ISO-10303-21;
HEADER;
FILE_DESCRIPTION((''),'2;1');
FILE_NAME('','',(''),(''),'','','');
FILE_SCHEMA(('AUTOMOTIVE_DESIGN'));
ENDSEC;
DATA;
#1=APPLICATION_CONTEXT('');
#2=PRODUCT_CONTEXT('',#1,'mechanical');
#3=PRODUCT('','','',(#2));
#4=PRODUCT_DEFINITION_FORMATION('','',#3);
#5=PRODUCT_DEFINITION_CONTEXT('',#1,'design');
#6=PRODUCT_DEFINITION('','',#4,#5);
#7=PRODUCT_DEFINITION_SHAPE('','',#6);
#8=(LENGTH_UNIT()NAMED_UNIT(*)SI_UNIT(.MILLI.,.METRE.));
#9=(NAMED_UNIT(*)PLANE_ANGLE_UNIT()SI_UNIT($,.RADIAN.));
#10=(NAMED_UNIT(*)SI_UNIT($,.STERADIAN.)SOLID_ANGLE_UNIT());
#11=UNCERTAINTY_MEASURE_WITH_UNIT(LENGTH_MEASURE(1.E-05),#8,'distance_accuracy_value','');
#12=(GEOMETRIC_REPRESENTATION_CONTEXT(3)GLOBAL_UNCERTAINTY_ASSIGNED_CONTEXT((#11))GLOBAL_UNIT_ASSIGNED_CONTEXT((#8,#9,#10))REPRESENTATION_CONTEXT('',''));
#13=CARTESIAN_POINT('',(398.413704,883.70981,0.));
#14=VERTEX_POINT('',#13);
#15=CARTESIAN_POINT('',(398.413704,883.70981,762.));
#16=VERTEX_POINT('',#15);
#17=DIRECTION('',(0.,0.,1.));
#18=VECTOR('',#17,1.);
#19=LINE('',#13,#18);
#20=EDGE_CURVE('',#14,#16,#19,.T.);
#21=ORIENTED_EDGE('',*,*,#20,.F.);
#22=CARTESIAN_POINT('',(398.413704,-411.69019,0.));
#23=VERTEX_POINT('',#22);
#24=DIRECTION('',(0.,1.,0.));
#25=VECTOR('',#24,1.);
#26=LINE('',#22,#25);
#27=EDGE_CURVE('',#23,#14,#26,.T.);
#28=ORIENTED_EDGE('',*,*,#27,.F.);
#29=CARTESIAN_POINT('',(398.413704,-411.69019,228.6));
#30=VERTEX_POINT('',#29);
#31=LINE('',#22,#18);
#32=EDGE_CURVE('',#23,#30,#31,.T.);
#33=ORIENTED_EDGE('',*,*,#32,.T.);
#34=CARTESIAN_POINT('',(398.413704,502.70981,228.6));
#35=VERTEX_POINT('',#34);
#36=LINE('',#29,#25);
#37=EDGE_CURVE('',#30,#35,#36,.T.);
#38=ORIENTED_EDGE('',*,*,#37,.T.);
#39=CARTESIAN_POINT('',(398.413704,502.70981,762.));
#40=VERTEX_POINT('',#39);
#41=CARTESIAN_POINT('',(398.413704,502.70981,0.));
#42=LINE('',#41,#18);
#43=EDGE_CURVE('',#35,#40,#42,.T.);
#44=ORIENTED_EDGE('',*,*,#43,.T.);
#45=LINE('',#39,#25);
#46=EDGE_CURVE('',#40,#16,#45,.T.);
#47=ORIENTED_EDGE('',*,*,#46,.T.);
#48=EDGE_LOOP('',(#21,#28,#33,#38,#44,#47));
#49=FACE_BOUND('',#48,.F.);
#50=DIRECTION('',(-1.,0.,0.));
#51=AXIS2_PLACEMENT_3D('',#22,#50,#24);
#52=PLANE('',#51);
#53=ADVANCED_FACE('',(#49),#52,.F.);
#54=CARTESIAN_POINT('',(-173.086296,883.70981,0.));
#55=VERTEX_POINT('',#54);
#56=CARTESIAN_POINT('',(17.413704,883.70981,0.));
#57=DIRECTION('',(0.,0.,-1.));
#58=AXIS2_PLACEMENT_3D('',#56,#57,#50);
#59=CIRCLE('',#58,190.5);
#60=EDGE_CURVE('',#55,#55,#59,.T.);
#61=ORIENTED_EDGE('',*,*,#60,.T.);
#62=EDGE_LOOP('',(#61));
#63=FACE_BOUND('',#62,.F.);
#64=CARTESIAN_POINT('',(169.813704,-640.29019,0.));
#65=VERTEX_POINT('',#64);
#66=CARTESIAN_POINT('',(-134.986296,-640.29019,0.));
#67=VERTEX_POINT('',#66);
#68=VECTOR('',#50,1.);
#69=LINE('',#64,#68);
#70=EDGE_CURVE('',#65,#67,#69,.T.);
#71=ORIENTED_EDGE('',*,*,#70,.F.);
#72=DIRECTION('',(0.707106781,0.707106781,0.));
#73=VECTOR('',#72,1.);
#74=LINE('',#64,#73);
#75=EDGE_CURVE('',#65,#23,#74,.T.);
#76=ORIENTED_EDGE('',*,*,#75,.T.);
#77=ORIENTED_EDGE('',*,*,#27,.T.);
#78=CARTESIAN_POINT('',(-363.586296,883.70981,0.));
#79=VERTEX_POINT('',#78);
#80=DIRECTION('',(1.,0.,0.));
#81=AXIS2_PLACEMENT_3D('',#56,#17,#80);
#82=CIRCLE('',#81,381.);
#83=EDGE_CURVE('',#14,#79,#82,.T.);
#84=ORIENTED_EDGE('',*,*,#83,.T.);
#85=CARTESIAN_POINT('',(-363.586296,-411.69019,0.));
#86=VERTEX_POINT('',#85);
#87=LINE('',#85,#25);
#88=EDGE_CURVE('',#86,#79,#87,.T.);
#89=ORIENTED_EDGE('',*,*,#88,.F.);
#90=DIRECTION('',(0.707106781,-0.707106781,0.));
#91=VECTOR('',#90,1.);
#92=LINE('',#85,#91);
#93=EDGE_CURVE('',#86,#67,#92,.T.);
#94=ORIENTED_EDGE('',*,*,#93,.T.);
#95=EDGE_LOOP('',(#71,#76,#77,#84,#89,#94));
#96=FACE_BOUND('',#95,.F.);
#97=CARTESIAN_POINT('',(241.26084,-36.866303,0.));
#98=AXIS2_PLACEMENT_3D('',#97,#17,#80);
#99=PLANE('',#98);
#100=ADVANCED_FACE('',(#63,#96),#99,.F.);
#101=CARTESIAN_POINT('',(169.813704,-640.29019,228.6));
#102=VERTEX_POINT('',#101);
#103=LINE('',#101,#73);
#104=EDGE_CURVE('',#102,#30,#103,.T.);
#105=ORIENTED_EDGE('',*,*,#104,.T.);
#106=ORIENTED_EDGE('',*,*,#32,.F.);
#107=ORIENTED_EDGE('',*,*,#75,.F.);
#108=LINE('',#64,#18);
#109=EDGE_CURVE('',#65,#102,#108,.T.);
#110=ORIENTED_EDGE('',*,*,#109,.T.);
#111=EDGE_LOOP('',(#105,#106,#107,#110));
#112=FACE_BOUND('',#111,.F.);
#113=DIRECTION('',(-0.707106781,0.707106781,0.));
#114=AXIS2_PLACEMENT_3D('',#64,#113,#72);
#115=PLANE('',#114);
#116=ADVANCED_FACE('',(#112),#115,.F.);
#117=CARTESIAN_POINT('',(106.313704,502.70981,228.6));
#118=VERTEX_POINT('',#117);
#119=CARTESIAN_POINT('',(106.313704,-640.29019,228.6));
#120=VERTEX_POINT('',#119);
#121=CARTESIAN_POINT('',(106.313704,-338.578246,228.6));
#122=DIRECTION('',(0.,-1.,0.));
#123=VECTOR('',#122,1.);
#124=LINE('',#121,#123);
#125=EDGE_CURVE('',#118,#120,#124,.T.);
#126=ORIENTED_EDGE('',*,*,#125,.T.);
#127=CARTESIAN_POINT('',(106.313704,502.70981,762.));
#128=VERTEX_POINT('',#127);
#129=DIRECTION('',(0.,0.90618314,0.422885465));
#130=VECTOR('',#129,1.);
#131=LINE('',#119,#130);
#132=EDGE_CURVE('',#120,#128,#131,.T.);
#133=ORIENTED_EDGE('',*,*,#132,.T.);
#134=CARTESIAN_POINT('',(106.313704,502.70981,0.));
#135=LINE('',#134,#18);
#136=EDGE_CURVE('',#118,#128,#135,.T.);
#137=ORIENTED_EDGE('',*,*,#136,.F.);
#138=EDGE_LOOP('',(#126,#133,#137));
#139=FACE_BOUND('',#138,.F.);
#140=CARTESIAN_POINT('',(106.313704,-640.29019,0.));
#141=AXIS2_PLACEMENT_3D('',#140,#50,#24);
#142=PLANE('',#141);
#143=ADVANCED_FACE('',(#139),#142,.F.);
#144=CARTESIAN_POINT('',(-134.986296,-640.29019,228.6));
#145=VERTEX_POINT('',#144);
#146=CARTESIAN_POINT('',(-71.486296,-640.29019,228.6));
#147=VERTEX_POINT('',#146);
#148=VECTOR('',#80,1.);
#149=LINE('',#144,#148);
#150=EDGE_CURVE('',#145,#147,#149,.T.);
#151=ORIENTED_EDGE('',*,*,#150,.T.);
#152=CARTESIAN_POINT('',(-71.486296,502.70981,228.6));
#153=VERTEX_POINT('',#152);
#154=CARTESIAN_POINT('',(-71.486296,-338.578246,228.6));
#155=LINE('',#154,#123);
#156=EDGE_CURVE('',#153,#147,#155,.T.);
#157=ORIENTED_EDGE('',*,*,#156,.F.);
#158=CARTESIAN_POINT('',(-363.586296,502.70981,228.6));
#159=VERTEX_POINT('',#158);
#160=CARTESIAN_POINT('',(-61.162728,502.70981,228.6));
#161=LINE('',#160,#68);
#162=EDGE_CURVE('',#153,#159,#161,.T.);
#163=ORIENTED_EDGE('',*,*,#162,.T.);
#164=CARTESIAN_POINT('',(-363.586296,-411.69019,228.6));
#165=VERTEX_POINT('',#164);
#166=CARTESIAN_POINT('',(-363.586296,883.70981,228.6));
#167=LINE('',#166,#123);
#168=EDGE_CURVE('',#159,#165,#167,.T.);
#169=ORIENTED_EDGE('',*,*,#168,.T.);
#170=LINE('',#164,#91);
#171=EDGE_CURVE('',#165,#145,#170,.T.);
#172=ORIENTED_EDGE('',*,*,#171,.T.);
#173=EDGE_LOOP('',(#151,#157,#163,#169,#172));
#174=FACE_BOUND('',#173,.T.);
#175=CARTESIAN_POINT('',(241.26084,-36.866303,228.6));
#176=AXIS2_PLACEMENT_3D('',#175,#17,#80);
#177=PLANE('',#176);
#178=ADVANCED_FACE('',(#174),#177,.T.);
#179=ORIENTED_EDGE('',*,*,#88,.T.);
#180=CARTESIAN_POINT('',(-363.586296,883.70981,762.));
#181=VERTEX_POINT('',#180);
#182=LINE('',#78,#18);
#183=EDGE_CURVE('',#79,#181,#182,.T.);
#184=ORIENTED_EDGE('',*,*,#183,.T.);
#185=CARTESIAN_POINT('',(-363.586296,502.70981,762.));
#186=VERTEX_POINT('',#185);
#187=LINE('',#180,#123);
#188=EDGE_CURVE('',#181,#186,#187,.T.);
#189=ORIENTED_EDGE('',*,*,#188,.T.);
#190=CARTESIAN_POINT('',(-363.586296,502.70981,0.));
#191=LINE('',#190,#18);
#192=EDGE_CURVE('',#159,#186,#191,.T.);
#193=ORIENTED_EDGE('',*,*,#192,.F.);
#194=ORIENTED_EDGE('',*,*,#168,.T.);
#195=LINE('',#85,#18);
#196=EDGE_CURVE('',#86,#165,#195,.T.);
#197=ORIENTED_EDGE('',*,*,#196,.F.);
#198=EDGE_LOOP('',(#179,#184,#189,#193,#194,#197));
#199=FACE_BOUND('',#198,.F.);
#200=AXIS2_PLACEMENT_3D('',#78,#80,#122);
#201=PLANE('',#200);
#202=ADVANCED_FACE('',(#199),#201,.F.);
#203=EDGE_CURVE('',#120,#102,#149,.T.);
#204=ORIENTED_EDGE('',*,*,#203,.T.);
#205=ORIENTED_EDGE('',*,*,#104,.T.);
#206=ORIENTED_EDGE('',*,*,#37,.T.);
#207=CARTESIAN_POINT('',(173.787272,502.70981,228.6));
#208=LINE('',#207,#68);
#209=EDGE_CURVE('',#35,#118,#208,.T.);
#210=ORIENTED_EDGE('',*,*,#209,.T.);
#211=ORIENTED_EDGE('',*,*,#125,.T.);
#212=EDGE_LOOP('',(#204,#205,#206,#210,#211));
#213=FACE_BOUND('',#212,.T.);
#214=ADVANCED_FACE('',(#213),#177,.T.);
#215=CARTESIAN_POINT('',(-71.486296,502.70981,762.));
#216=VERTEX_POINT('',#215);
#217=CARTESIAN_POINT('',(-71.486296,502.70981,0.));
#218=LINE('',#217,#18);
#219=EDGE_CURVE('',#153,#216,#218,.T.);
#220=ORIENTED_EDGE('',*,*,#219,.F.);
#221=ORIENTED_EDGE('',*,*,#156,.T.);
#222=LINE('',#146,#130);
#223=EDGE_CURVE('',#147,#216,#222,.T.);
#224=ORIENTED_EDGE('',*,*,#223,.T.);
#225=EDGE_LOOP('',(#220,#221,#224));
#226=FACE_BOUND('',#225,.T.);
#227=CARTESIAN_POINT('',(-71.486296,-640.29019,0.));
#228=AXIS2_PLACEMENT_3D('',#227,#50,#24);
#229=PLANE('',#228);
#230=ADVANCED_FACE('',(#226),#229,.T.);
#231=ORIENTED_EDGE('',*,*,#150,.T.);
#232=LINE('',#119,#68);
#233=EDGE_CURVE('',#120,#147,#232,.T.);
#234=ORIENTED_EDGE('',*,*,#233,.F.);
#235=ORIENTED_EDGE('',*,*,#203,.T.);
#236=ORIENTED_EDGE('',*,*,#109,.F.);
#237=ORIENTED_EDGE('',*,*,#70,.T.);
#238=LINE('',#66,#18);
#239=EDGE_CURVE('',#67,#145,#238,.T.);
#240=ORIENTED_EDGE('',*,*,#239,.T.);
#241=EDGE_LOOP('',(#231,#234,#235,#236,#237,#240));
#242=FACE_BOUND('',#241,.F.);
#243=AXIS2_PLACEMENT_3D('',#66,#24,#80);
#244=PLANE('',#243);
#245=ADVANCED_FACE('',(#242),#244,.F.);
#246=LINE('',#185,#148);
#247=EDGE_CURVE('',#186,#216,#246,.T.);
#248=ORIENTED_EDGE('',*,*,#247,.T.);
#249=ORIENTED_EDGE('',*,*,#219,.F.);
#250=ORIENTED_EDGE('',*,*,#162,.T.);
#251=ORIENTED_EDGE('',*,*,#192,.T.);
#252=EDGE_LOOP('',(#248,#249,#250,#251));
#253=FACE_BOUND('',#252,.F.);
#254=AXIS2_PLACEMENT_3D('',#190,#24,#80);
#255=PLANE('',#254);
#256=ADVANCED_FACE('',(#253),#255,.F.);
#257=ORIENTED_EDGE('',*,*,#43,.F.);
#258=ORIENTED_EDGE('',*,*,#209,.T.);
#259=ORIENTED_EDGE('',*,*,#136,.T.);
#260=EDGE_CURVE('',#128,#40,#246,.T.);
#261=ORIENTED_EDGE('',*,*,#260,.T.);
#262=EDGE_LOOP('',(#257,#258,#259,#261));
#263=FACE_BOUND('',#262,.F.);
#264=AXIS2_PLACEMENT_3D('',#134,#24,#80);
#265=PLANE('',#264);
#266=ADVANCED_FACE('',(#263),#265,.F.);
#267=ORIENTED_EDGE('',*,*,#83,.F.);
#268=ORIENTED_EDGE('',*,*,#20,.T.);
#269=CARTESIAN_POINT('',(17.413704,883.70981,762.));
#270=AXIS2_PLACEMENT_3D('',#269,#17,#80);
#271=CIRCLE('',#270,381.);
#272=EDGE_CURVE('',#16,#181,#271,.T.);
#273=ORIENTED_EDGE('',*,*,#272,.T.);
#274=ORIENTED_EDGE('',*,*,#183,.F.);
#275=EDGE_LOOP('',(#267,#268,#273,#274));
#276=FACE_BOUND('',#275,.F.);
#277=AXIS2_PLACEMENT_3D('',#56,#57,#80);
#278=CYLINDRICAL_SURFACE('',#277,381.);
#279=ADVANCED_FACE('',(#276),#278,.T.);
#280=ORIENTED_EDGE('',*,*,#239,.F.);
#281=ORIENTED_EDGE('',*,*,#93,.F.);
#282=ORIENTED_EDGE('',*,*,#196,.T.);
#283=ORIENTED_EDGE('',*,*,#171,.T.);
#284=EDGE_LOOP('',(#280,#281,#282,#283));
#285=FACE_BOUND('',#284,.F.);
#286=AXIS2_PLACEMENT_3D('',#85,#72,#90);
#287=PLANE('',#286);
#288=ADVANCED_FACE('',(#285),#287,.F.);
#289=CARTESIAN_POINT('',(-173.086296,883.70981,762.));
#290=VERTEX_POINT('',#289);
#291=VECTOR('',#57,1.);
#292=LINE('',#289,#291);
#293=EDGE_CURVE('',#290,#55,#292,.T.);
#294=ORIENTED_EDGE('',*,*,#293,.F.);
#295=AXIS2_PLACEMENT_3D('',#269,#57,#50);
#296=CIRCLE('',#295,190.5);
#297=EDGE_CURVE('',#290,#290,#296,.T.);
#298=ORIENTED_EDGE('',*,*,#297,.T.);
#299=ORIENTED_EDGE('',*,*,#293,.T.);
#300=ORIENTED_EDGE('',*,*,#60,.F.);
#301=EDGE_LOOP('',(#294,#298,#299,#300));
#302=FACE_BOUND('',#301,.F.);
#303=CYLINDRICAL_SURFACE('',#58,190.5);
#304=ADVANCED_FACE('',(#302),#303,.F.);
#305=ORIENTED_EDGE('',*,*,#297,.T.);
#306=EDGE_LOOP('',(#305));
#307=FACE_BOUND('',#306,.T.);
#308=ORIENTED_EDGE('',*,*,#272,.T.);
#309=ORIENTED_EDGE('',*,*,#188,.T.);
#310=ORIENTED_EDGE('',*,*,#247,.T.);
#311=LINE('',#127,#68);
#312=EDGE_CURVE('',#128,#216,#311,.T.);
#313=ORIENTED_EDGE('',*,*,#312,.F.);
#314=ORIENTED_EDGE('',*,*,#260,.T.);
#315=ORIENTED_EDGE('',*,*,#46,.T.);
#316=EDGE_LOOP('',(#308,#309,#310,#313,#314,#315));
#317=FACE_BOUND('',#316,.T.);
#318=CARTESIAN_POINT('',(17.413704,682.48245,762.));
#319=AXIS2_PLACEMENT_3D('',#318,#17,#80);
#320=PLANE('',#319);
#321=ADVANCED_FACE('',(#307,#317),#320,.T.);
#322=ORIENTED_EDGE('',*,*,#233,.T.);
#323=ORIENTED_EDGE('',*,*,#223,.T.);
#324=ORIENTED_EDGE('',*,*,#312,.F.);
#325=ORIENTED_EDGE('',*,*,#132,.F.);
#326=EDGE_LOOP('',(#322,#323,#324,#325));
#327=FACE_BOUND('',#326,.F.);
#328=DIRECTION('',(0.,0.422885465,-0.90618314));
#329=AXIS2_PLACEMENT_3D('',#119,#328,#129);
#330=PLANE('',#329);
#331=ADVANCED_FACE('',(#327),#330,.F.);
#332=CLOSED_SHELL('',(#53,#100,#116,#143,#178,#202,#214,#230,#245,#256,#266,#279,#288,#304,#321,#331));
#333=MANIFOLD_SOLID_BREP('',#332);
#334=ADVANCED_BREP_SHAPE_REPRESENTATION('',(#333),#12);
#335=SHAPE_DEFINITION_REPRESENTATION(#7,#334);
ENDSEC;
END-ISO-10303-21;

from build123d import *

# Parameters (mm, degrees)
F0_W     = 177.8
F0_H     = 1143
F1_DEPTH = 228.6
F2_DEPTH = 762
F4_DEPTH = 177.8


with BuildPart() as f1:
    # F0 (on Top) → F1 (new body)
    with BuildSketch(Plane.XY):
        Polygon((398.4137039741, -411.6901900116), (398.4137039741, 502.7098099884), (106.3137039741, 502.7098099884), (106.3137039741, -640.2901900116), (169.8137039741, -640.2901900116), align=None)
        with BuildLine():
            Line((398.4137039741, 883.7098099884), (207.9137039741, 883.7098099884))
            ThreePointArc((207.9137039741, 883.7098099884), (17.4137039741, 693.2098099884), (-173.0862960259, 883.7098099884))
            Line((-173.0862960259, 883.7098099884), (-363.5862960259, 883.7098099884))
            Line((-363.5862960259, 883.7098099884), (-363.5862960259, 502.7098099884))
            Line((-363.5862960259, 502.7098099884), (-71.4862960259, 502.7098099884))
            Line((-71.4862960259, 502.7098099884), (106.3137039741, 502.7098099884))
            Line((106.3137039741, 502.7098099884), (398.4137039741, 502.7098099884))
            Line((398.4137039741, 502.7098099884), (398.4137039741, 883.7098099884))
        make_face()
        Polygon((-71.4862960259, 502.7098099884), (-363.5862960259, 502.7098099884), (-363.5862960259, -411.6901900116), (-134.9862960259, -640.2901900116), (-71.4862960259, -640.2901900116), align=None)
        with Locations((17.4137039741, -68.7901900116)):
            Rectangle(F0_W, F0_H)
        with BuildLine():
            ThreePointArc((-173.0862960259, 883.7098099884), (17.4137039741, 1074.2098099884), (207.9137039741, 883.7098099884))
            Line((207.9137039741, 883.7098099884), (398.4137039741, 883.7098099884))
            ThreePointArc((398.4137039741, 883.7098099884), (17.4137039741, 1264.7098099884), (-363.5862960259, 883.7098099884))
            Line((-363.5862960259, 883.7098099884), (-173.0862960259, 883.7098099884))
        make_face()
    extrude(amount=F1_DEPTH)

    # F0 (on Top) → F2 (join)
    with BuildSketch(Plane.XY):
        with BuildLine():
            Line((398.4137039741, 883.7098099884), (207.9137039741, 883.7098099884))
            ThreePointArc((207.9137039741, 883.7098099884), (17.4137039741, 693.2098099884), (-173.0862960259, 883.7098099884))
            Line((-173.0862960259, 883.7098099884), (-363.5862960259, 883.7098099884))
            Line((-363.5862960259, 883.7098099884), (-363.5862960259, 502.7098099884))
            Line((-363.5862960259, 502.7098099884), (-71.4862960259, 502.7098099884))
            Line((-71.4862960259, 502.7098099884), (106.3137039741, 502.7098099884))
            Line((106.3137039741, 502.7098099884), (398.4137039741, 502.7098099884))
            Line((398.4137039741, 502.7098099884), (398.4137039741, 883.7098099884))
        make_face()
        with Locations((17.4137039741, -68.7901900116)):
            Rectangle(F0_W, F0_H)
        with BuildLine():
            ThreePointArc((-173.0862960259, 883.7098099884), (17.4137039741, 1074.2098099884), (207.9137039741, 883.7098099884))
            Line((207.9137039741, 883.7098099884), (398.4137039741, 883.7098099884))
            ThreePointArc((398.4137039741, 883.7098099884), (17.4137039741, 1264.7098099884), (-363.5862960259, 883.7098099884))
            Line((-363.5862960259, 883.7098099884), (-173.0862960259, 883.7098099884))
        make_face()
    extrude(amount=F2_DEPTH)

    # F3 (on face) → F4 (cut)
    with BuildSketch(Plane.YZ.offset(106.3137039741)):
        Polygon((-640.2901900116, 762), (-640.2901900116, 228.6), (502.7098099884, 762), align=None)
    extrude(amount=-F4_DEPTH, mode=Mode.SUBTRACT)


solid = f1.part
